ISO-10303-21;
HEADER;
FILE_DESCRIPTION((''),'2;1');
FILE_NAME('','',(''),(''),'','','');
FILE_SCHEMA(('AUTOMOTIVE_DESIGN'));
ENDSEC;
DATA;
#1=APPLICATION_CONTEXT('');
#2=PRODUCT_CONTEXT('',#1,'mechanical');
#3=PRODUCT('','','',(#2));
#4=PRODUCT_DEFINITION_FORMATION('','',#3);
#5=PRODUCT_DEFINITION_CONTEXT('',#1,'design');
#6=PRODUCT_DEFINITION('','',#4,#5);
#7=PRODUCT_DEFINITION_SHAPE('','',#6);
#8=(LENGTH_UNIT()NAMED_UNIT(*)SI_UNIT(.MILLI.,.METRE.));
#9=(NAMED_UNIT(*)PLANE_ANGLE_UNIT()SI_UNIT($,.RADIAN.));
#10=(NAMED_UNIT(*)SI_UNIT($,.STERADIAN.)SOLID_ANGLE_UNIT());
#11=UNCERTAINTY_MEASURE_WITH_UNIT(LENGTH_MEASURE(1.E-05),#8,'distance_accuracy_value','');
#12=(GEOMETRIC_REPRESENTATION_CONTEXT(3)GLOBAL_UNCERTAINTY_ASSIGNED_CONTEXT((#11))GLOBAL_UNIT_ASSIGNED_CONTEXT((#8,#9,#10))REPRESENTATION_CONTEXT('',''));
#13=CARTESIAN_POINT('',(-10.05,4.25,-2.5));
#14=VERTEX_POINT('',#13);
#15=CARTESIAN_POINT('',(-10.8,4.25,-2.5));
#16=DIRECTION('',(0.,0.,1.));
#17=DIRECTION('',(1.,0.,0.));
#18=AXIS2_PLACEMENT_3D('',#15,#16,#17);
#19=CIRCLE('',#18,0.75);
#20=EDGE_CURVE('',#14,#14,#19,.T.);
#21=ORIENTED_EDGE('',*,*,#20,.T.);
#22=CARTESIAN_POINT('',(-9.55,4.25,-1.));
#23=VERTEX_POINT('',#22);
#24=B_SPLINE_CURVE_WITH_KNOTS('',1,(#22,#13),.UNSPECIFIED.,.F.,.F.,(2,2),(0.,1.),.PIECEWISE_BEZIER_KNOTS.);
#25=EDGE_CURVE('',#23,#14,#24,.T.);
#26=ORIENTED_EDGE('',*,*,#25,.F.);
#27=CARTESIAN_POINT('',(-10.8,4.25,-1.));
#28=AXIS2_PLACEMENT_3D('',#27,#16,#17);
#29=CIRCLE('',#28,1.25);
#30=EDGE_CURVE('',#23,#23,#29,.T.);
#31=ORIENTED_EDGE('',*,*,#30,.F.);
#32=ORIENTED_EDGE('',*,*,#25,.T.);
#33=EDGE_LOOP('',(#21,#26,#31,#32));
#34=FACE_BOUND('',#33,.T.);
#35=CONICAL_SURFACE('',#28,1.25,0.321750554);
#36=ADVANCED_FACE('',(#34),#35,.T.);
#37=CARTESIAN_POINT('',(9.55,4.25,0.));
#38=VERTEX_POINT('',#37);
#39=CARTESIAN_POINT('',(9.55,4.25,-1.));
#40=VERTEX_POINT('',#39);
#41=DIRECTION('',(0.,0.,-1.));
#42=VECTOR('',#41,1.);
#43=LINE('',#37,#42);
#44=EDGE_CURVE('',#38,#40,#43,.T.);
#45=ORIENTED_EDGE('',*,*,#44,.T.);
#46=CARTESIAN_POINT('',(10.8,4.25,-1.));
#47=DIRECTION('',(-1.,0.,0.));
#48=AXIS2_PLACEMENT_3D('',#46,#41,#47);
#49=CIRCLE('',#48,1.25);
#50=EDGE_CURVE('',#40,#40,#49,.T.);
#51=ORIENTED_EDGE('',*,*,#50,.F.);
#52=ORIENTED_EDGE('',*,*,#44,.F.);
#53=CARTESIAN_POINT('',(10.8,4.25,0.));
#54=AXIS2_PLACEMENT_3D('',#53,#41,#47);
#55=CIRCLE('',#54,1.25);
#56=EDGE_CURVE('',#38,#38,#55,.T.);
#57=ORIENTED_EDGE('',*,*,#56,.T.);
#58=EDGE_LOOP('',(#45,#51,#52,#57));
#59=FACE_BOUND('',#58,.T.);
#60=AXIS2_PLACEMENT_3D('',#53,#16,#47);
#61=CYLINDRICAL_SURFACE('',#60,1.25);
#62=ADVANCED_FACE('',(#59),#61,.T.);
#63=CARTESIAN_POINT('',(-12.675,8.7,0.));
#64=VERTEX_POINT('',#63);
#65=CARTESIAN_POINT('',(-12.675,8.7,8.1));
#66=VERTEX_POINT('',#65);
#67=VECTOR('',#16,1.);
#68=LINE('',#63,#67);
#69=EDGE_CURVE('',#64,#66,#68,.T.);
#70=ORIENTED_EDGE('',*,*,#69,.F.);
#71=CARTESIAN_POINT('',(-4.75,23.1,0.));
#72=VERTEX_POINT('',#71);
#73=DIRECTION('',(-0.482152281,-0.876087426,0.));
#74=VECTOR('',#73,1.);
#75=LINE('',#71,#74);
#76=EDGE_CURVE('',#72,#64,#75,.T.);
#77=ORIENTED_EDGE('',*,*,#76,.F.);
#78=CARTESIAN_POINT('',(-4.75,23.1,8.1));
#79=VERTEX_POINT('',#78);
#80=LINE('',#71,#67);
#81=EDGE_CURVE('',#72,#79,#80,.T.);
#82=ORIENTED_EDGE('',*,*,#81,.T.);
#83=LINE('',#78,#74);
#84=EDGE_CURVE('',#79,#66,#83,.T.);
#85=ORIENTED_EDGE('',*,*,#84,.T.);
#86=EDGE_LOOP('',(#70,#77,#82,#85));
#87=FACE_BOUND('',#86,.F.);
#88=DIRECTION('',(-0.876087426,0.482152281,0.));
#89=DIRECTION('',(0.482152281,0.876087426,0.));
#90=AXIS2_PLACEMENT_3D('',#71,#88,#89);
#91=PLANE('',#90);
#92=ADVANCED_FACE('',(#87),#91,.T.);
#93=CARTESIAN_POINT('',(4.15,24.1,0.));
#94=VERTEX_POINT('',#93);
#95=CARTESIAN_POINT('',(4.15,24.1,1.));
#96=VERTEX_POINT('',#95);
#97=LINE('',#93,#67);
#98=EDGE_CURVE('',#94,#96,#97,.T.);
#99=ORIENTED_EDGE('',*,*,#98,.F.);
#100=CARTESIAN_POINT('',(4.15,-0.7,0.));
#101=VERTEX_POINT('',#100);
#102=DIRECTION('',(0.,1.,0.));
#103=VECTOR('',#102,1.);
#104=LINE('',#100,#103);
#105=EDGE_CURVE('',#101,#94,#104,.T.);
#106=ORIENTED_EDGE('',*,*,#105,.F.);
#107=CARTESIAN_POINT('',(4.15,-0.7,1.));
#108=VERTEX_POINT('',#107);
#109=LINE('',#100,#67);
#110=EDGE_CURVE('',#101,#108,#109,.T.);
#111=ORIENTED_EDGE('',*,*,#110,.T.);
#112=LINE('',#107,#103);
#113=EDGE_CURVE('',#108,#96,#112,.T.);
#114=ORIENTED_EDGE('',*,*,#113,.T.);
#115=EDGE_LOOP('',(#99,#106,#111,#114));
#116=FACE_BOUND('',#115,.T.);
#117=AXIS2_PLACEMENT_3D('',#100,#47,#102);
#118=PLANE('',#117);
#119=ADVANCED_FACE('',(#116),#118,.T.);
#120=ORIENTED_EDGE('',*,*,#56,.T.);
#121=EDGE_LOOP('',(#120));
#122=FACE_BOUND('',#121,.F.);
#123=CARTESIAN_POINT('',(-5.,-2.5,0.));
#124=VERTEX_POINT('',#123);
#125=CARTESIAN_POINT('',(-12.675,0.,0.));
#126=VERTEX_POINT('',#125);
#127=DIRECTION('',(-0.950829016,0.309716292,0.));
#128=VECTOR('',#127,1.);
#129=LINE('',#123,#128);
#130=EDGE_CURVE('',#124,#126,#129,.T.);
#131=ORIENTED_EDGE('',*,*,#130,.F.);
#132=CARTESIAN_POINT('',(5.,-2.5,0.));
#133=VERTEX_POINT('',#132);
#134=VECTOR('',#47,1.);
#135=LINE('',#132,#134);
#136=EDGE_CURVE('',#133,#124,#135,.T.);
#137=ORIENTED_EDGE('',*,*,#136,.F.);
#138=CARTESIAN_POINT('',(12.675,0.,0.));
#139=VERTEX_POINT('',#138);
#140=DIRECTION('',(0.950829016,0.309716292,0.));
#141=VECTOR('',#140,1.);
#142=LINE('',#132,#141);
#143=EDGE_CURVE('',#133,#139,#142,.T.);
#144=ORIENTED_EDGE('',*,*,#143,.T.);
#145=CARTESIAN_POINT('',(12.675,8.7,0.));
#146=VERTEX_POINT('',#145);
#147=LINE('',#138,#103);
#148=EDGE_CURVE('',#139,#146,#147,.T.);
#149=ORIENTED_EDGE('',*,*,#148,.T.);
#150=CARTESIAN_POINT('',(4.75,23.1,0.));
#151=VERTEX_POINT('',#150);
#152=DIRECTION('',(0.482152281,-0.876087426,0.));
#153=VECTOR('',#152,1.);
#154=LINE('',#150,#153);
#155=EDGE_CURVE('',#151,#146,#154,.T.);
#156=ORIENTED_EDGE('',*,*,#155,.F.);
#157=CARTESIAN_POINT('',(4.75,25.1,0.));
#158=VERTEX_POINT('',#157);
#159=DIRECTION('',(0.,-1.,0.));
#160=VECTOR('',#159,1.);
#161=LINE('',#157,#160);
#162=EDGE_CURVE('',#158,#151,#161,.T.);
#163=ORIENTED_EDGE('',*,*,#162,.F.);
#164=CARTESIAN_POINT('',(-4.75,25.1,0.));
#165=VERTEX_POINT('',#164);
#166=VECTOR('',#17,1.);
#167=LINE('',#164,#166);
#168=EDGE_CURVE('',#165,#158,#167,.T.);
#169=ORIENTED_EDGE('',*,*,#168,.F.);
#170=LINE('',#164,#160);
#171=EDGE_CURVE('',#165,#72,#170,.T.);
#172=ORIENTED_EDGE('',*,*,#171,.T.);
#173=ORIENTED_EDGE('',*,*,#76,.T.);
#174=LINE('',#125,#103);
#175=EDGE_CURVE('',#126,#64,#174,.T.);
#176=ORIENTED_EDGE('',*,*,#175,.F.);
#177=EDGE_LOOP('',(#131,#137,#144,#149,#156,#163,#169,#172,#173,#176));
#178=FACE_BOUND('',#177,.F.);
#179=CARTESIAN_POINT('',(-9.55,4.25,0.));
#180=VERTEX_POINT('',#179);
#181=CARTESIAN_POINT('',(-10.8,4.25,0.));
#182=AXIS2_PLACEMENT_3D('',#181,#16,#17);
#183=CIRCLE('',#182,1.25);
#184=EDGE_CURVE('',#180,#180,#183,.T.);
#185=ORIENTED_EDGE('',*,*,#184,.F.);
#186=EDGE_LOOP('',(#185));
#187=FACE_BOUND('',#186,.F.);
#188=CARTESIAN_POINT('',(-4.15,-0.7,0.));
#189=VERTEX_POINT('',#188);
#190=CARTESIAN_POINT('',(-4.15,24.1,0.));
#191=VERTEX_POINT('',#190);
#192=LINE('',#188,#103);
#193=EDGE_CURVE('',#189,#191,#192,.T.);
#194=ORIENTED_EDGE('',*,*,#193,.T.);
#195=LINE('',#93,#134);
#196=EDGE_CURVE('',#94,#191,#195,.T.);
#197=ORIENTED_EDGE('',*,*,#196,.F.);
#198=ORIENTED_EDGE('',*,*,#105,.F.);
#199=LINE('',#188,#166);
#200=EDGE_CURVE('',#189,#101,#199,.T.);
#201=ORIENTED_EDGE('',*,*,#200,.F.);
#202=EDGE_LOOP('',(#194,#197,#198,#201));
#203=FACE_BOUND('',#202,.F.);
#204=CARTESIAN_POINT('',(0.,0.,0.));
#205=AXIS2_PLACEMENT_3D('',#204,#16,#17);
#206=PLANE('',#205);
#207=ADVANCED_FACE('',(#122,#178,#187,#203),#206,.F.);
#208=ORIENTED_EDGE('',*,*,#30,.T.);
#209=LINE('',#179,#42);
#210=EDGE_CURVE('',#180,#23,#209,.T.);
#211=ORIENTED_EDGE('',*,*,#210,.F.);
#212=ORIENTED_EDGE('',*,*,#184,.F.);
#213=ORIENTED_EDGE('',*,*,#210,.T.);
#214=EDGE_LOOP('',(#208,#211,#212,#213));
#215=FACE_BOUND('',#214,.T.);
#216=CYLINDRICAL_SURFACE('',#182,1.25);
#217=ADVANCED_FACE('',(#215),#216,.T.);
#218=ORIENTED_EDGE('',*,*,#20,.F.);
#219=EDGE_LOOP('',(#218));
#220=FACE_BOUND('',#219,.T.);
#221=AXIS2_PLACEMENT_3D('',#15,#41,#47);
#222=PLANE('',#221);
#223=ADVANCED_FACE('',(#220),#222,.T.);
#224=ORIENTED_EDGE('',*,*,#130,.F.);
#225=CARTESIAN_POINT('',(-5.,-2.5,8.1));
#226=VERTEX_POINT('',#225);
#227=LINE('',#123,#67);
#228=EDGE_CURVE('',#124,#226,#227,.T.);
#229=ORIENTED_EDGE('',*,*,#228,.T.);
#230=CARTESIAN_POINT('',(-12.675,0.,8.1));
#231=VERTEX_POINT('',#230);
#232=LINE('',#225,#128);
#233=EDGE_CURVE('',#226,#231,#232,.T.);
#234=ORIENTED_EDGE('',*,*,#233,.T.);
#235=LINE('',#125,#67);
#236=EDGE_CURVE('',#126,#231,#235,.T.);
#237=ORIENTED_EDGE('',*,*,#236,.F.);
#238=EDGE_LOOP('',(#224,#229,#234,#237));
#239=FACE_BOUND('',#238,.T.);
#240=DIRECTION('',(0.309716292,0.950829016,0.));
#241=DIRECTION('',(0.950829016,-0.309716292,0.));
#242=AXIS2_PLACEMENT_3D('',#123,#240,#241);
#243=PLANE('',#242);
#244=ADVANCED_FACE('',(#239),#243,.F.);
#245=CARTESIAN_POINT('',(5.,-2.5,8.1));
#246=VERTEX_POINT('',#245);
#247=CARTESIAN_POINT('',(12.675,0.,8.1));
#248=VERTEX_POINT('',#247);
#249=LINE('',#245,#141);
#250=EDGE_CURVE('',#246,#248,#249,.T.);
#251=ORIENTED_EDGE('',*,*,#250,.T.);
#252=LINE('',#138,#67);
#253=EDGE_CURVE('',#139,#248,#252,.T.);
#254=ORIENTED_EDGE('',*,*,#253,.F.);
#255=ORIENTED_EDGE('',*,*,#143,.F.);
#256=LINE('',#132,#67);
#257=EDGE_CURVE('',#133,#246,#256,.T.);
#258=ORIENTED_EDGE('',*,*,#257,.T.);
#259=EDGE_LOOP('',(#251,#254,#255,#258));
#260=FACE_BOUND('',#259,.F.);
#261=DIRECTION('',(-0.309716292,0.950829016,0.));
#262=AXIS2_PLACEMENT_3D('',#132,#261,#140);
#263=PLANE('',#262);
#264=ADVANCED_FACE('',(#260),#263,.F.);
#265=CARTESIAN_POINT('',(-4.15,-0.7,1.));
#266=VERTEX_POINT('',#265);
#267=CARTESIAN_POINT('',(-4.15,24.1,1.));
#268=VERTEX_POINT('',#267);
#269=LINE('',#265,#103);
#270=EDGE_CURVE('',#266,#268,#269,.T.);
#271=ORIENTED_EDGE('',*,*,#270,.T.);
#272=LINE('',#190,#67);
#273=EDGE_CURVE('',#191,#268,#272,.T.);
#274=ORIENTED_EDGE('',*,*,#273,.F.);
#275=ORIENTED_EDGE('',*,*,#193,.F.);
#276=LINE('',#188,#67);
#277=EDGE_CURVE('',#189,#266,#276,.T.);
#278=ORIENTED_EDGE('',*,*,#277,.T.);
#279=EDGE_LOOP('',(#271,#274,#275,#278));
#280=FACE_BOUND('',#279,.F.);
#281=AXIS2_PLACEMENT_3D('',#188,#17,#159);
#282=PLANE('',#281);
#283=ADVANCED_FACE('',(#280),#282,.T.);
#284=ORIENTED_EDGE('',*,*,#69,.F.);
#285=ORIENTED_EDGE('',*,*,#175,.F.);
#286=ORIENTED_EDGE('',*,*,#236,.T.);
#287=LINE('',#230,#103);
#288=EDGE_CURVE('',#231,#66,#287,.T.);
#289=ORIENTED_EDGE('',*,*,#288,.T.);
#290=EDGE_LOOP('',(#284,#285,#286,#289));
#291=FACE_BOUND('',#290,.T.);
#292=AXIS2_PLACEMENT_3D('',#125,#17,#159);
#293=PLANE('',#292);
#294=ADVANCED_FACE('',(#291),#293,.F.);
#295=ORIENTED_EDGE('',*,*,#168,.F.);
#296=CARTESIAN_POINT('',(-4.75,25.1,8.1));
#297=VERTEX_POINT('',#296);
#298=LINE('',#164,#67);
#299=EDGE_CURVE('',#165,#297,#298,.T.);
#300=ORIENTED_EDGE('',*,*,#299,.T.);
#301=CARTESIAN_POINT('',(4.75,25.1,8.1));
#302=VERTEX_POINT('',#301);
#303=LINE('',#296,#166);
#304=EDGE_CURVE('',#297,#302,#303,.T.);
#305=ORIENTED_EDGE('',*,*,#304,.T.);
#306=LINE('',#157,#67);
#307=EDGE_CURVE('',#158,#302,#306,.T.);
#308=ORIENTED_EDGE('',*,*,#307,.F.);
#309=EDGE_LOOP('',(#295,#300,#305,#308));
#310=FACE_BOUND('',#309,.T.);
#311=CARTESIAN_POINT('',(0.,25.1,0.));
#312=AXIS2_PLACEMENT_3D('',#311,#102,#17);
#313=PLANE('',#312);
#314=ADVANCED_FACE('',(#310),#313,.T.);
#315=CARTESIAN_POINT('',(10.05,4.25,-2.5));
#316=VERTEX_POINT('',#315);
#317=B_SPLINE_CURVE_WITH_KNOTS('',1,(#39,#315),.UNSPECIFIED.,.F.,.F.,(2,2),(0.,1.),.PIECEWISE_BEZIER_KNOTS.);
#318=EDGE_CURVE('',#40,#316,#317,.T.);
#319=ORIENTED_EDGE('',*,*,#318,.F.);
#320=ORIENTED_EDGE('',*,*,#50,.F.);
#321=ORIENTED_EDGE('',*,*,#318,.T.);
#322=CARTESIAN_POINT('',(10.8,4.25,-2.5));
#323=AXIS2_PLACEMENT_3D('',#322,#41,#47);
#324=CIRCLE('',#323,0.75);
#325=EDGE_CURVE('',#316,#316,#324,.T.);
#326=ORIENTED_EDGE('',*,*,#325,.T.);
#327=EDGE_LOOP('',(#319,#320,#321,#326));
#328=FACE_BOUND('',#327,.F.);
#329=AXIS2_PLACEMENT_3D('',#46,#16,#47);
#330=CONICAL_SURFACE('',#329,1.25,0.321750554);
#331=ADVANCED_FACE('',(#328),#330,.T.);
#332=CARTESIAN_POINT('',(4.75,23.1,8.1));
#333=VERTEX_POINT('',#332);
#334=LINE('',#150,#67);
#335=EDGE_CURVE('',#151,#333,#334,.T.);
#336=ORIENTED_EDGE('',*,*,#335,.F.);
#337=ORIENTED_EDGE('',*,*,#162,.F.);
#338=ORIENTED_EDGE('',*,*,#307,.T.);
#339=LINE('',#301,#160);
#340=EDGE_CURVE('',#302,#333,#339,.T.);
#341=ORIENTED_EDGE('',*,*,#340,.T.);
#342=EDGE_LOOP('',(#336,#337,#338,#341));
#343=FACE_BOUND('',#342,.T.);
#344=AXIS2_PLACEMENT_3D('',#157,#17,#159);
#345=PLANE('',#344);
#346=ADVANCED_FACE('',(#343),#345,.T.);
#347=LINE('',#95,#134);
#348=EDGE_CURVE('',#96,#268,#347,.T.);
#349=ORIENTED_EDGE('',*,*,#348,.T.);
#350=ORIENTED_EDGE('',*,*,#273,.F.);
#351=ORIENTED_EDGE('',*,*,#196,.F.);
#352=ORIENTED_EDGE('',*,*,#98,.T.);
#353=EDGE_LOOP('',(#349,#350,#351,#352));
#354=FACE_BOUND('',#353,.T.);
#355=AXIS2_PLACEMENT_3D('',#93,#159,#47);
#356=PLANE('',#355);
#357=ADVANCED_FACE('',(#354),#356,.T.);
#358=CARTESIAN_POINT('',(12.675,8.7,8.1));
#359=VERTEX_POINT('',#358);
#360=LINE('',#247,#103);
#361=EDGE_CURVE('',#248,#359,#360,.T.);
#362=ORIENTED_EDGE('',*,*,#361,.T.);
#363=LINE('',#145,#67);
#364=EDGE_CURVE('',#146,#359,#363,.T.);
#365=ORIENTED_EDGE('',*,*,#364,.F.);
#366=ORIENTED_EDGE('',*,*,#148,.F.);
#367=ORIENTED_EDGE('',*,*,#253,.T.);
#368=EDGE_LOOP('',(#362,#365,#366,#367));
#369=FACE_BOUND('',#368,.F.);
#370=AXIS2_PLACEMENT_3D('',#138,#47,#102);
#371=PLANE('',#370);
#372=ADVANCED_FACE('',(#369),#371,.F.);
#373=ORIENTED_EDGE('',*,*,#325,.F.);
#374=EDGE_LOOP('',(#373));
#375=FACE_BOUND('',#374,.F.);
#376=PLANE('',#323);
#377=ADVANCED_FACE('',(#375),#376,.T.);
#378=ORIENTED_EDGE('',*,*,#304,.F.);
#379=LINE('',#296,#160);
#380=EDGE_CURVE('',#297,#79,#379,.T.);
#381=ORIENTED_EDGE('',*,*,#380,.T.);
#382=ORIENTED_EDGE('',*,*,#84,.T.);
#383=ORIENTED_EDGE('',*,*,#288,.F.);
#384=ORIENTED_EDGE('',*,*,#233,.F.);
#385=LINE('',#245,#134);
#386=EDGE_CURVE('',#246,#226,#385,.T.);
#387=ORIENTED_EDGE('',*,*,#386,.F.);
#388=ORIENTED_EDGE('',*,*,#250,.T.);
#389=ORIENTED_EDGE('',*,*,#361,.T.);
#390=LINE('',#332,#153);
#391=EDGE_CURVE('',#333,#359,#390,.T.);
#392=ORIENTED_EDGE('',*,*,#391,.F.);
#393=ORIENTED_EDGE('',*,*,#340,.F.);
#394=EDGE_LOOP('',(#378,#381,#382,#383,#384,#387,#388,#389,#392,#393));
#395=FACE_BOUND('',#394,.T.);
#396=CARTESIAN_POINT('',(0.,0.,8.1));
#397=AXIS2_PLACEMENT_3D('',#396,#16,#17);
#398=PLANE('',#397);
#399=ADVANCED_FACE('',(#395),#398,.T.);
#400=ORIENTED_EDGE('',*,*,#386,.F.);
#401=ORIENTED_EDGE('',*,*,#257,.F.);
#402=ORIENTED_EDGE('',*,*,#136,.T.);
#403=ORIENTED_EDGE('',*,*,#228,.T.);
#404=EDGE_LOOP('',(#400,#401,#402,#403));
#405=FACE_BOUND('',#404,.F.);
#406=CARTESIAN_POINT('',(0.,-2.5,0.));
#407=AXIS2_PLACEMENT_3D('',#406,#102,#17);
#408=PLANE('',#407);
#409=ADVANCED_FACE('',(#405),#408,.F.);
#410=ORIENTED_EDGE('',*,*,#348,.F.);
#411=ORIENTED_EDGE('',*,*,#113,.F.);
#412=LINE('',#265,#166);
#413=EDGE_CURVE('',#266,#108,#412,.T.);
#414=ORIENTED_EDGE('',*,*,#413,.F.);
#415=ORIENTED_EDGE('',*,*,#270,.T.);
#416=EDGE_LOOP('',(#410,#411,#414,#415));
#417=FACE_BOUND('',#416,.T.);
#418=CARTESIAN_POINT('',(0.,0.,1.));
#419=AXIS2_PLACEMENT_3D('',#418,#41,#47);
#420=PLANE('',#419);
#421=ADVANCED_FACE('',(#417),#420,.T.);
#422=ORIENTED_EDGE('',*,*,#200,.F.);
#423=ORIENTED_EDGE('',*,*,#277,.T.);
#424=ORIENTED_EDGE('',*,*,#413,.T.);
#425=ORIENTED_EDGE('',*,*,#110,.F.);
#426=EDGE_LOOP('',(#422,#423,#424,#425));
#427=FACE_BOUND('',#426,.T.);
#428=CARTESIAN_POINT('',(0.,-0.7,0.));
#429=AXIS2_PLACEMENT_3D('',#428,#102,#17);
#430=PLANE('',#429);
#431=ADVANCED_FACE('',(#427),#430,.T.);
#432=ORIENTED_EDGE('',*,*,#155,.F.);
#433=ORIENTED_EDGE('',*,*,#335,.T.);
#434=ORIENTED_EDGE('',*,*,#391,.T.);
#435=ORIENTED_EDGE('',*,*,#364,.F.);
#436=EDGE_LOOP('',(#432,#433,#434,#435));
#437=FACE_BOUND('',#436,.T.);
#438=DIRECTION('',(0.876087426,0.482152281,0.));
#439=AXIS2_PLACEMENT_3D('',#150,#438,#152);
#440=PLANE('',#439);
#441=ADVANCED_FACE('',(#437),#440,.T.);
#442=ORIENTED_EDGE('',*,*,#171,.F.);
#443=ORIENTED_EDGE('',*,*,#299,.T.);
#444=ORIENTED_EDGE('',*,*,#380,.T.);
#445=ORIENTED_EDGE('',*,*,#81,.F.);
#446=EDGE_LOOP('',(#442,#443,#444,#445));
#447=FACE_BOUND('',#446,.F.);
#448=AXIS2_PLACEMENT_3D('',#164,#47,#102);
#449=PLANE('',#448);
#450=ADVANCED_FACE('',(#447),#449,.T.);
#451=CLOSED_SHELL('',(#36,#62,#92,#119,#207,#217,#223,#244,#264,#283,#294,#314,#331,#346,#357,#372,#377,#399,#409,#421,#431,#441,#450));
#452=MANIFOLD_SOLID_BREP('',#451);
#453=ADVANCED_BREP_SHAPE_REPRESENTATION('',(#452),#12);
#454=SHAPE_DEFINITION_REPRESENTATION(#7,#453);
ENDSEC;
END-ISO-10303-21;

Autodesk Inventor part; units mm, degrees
ref_plane "YZ Plane" through (0, 0, 0) normal (1, 0, 0) x (0, 1, 0)
ref_plane "XZ Plane" through (0, 0, 0) normal (0, 1, 0) x (-1, 0, 0)
sketch "Sketch1" plane through (0, 0, 0) normal (0, 0, 1) x (1, 0, 0)
  line L0 (-5, -2.5) -> (5, -2.5)
  line L1 (5, -2.5) -> (12.675, 0)
  line L2 (-5, -2.5) -> (-12.675, 0)
  line L3 (12.675, 0) -> (-12.675, 0) construction
  line L4 (12.675, 0) -> (12.675, 8.7)
  line L5 (-12.675, 0) -> (-12.675, 8.7)
  line L6 (-12.675, 8.7) -> (-4.75, 23.1)
  line L7 (-4.75, 23.1) -> (-4.75, 25.1)
  line L8 (-4.75, 25.1) -> (4.75, 25.1)
  line L9 (4.75, 25.1) -> (4.75, 23.1)
  line L10 (4.75, 23.1) -> (12.675, 8.7)
  line L11 (0, -8.02) -> (0, 30.62) projected
  line L12 (0, 25.1) -> (0, -2.5)
  point P0 (0, 0)
  point P1 (0, 0)
  dimension "d0" = 10
  dimension "d1" = 25.35
  dimension "d2" = 2.5
  dimension "d3" = 8.7
  dimension "d4" = 27.6
  dimension "d6" = 2
  dimension "d7" = 9.5
extrude "Body" add sketch "Sketch1" along normal blind 8.1 contours L11 L8 L9 L10 L4 L1 L0
sketch "Sketch5" plane through (0, 0, 0) normal (0, 0, -1) x (-1, 0, 0)
  circle A0 centre (-10.8, 4.25) radius 1.25
  line L0 (-10.8, 4.25) -> (0, 4.25) construction
  line L1 (0, 25.1) -> (0, -2.5) projected
  line L2 (0, -2.5) -> (-5, -2.5) projected
  point P0 (0, 0)
  dimension "d26" = 2.5
  dimension "d27" = 10.8
  dimension "d28" = 6.75
extrude "PinCylinder" add sketch "Sketch5" along normal blind 1
ref_plane "Work Plane3" through (10.8, 4.25, -2.5) normal (0, 0, -1) x (-1, 0, 0)
sketch "Sketch6" plane through (10.8, 4.25, -2.5) normal (0, 0, -1) x (-1, 0, 0)
  circle A0 centre (0, 0) radius 1.25 projected
  circle A1 centre (0, 0) radius 0.75
  point P0 (10.8, -4.25)
  dimension "d32" = 1.5
loft "Loft2" add profiles "Sketch6" section 1 edges at (12.05, 4.25, -1) contours A1
sketch "Sketch7" plane through (0, 0, 0) normal (0, 0, -1) x (-1, 0, 0)
  line L0 (0, -0.7) -> (-4.15, -0.7)
  line L1 (-4.15, -0.7) -> (-4.15, 24.1)
  line L2 (0, -2.5) -> (-5, -2.5) projected
  line L3 (0, 25.1) -> (0, -2.5) projected
  line L4 (-4.15, 24.1) -> (0, 24.1)
  point P0 (0, 0)
  dimension "d37" = 4.15
  dimension "d38" = 24.8
  dimension "d39" = 1.8
extrude "MiddleCutout" cut sketch "Sketch7" against normal blind 1
mirror "Mirror1" about plane through (0, 25.1, 0) normal (-1, 0, 0)
properties part number "Inkjet"
